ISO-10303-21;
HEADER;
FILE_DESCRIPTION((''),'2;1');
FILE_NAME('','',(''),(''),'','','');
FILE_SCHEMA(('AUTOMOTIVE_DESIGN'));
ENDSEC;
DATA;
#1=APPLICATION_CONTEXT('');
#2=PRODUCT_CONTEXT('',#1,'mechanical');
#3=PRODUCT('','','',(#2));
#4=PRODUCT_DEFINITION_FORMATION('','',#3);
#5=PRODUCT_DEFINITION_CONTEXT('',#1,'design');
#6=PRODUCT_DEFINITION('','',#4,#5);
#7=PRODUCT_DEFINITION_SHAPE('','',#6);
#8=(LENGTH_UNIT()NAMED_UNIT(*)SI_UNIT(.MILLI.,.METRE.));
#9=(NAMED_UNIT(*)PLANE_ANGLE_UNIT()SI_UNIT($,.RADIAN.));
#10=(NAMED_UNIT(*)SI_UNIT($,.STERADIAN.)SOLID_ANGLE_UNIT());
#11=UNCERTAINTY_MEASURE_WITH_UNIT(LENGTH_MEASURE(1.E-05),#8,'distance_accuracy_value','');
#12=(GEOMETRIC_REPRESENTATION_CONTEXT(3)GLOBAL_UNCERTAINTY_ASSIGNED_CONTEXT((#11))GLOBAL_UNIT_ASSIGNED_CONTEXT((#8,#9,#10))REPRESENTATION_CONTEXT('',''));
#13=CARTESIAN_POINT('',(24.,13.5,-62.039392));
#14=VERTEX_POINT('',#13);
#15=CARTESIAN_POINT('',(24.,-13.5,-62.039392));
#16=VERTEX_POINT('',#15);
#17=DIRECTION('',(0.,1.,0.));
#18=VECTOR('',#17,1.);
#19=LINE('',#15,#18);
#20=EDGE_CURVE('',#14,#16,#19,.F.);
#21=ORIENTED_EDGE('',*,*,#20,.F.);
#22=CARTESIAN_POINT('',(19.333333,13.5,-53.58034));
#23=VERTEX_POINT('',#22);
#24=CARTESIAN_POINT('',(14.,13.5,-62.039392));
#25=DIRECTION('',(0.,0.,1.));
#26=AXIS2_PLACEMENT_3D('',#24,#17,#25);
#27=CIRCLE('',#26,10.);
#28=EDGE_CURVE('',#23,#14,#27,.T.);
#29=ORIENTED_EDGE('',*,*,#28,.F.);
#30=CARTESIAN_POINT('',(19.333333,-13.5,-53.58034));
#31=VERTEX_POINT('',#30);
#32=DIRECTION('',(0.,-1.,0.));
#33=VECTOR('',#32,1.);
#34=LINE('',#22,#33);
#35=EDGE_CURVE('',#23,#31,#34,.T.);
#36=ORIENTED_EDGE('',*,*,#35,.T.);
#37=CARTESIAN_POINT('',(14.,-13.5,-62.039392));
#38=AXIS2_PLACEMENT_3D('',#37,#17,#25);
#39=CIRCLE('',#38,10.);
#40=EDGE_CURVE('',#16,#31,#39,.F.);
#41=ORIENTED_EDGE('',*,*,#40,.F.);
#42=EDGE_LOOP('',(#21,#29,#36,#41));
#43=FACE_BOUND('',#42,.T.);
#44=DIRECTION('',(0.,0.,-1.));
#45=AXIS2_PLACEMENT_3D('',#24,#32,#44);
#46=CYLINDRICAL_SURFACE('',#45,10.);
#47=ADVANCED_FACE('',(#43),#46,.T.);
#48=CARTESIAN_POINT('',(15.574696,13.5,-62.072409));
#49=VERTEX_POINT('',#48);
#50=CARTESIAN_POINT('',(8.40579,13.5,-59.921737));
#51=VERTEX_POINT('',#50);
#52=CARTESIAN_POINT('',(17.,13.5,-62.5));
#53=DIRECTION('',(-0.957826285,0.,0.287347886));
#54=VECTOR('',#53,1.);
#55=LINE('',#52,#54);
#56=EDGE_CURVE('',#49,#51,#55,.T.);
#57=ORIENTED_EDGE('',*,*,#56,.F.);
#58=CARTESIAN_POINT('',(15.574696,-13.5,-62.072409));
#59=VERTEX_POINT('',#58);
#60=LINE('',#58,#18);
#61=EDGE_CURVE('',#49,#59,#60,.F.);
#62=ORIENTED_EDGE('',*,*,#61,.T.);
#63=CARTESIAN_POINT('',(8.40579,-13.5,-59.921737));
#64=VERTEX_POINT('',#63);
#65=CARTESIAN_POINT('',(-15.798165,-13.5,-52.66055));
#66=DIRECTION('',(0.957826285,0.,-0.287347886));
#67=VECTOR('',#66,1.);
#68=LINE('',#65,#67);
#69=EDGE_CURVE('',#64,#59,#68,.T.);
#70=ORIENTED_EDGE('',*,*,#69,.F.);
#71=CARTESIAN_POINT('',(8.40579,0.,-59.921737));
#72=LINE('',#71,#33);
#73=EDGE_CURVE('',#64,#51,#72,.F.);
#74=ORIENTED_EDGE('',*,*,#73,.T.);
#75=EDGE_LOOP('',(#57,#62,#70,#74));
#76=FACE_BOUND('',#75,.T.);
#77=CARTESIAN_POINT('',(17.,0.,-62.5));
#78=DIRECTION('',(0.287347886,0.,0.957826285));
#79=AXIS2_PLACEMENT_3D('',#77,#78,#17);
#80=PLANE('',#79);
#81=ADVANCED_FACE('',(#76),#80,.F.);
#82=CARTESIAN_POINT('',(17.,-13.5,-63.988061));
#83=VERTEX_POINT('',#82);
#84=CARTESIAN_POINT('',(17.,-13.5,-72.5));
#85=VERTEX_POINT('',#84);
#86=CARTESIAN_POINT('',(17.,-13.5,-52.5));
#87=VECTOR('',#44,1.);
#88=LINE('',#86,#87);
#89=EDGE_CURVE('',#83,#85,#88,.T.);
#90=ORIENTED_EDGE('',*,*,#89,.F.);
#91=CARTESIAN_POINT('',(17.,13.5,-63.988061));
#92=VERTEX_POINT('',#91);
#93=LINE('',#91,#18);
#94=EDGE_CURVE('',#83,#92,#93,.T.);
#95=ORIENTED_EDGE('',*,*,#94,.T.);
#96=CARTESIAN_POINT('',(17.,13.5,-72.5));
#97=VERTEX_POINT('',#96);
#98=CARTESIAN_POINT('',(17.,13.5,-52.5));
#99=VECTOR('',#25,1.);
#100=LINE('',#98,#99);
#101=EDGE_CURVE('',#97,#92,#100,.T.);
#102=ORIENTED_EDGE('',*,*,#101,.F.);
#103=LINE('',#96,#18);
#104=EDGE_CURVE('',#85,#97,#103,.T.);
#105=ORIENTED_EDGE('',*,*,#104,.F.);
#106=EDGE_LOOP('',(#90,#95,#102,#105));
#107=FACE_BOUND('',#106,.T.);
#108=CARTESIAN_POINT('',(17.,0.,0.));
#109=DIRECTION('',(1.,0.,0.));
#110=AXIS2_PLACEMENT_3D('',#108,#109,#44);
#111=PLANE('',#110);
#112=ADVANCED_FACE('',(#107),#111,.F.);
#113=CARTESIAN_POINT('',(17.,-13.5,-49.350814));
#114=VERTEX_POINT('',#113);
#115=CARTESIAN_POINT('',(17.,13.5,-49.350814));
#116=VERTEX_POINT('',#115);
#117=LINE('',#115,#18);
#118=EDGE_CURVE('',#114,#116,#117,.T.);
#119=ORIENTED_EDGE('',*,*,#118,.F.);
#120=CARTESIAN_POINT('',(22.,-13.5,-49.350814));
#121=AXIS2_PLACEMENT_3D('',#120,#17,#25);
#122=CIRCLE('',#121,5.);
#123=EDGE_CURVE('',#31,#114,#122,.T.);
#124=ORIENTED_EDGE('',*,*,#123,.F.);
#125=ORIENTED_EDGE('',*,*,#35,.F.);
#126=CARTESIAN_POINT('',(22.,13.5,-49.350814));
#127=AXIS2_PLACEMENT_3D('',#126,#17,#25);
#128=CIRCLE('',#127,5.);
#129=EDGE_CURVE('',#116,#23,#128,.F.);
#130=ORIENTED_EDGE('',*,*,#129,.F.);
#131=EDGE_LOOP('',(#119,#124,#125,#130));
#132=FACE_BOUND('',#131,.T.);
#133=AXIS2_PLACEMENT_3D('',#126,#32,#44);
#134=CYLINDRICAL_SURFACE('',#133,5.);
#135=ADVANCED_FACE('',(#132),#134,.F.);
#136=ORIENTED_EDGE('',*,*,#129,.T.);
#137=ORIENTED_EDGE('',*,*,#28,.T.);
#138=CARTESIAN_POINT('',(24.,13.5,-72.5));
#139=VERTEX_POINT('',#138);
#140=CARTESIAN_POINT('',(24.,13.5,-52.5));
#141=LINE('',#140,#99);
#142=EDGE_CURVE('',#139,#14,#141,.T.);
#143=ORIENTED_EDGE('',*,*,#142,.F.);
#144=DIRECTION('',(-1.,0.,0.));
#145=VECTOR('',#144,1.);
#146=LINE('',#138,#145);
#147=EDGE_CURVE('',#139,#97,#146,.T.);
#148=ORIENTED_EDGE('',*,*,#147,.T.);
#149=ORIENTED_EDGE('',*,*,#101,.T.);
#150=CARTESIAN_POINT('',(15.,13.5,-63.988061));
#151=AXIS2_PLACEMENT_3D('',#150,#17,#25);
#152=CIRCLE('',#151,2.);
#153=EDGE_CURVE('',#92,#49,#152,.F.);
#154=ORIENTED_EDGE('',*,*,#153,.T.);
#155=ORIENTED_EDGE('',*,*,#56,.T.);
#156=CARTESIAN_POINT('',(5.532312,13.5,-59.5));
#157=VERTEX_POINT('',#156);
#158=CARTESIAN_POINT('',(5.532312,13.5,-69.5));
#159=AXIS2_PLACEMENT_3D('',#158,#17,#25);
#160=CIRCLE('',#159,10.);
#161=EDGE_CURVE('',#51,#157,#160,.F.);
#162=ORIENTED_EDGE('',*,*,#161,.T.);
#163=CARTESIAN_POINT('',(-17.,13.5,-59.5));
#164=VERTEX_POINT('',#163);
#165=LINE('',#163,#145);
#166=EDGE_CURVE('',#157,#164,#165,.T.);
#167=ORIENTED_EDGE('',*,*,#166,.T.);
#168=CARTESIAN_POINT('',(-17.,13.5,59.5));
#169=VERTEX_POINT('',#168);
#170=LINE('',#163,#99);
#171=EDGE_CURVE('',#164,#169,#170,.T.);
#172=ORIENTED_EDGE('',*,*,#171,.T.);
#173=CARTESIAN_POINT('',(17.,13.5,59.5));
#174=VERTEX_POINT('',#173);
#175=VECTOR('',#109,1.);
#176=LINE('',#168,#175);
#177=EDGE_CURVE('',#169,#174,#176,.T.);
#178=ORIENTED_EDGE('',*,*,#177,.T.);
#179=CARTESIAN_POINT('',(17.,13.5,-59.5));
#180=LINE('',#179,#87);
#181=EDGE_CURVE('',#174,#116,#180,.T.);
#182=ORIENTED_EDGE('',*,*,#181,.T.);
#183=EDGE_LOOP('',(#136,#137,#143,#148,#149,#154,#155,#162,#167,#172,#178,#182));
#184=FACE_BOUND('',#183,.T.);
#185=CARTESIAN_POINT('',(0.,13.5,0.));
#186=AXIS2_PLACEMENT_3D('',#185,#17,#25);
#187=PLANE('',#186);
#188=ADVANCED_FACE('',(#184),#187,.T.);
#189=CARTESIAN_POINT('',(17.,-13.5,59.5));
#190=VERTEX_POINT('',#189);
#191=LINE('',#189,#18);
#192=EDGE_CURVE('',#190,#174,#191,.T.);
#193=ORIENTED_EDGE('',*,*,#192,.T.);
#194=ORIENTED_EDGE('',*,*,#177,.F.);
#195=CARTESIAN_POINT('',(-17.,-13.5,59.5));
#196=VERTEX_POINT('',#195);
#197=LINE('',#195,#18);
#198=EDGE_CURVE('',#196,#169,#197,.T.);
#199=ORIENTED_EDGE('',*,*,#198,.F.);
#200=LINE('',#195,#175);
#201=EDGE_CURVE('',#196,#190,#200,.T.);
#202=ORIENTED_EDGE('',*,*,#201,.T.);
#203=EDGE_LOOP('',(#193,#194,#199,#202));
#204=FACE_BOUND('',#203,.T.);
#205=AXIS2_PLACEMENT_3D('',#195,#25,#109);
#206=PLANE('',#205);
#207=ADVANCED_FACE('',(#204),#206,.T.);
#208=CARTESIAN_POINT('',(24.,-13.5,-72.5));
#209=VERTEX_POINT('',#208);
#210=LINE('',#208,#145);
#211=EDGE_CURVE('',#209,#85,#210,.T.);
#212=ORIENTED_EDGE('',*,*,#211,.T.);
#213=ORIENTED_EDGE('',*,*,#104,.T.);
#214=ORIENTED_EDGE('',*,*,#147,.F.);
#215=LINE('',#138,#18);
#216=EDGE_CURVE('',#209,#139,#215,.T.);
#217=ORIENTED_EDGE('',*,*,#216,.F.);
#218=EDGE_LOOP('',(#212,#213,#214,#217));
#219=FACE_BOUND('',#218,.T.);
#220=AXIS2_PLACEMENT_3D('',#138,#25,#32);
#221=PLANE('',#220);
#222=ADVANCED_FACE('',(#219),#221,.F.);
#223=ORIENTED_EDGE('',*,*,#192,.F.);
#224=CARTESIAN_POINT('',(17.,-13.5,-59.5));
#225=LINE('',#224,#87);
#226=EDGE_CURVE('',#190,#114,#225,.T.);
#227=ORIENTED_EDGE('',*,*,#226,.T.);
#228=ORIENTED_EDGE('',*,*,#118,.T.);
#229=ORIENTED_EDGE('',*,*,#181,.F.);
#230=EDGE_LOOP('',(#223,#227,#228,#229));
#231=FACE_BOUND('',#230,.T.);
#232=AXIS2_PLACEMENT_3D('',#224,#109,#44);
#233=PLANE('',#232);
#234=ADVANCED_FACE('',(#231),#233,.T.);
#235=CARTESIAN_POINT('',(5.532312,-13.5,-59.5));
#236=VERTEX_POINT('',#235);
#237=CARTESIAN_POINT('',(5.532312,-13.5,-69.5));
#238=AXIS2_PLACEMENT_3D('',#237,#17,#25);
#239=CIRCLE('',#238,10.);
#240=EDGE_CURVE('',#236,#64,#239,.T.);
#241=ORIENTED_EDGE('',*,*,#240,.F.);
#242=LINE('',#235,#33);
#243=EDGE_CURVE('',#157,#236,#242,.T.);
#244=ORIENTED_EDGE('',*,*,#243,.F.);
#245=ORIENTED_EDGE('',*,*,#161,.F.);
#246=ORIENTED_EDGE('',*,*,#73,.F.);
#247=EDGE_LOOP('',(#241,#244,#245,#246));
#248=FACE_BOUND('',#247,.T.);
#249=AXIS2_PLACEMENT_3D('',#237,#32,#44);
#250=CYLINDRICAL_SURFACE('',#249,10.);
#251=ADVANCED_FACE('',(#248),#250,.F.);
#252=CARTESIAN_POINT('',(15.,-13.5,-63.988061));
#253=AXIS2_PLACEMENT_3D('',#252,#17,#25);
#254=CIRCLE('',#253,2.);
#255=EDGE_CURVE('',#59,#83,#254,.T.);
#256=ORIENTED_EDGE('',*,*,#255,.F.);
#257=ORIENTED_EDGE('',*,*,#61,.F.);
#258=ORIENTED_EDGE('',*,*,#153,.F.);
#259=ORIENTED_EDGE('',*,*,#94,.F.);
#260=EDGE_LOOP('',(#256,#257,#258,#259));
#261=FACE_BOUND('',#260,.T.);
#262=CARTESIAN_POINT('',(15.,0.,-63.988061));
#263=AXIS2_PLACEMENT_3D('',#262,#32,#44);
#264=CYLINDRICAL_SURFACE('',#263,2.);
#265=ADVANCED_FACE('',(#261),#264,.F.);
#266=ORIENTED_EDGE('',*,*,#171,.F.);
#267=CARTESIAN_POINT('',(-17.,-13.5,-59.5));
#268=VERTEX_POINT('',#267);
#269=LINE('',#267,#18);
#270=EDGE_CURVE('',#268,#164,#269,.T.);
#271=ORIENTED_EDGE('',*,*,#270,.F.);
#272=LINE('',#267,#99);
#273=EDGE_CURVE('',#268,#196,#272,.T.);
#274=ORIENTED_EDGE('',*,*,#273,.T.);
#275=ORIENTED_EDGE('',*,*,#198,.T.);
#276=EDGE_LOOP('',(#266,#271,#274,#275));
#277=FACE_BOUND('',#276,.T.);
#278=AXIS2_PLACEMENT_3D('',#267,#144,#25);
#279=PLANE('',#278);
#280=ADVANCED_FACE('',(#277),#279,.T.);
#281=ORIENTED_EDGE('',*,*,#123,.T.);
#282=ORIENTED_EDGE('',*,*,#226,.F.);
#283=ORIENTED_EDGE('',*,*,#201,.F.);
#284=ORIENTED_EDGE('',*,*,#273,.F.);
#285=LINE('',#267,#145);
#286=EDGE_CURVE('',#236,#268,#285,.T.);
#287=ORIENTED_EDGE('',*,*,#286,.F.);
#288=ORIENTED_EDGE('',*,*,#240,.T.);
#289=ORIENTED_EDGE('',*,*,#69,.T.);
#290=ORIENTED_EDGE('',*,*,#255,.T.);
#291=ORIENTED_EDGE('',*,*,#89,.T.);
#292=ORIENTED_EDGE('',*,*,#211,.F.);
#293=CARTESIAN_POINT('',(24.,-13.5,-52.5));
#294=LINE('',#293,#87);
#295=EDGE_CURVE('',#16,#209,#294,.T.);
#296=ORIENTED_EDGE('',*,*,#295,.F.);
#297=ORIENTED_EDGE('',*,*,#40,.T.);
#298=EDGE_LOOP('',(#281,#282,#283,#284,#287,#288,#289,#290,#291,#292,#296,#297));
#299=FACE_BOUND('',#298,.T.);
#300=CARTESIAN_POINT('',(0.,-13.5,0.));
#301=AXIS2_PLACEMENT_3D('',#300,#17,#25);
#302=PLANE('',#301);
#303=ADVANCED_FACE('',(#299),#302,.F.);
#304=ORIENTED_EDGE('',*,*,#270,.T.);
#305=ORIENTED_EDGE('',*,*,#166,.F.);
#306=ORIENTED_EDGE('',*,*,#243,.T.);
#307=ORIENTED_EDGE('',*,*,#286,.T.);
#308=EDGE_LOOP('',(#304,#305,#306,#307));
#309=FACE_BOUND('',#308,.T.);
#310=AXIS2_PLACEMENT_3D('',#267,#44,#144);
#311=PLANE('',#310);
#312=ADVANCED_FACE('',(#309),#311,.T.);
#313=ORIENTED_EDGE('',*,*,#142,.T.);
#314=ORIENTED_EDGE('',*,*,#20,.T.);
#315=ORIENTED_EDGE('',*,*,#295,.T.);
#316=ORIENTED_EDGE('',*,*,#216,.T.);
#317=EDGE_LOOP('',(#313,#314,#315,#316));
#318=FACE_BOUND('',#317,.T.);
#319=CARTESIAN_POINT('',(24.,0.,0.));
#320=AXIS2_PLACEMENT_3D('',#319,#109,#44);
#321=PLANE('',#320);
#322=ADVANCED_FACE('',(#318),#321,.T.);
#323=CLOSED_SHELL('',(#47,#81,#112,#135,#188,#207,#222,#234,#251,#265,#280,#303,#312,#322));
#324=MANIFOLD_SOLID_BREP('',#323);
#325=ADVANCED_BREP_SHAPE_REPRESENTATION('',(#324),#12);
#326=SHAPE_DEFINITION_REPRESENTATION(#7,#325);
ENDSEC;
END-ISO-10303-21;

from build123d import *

# Parameters (mm, degrees)
EXTRUDE_367_DEPTH      = 13.5
EXTRUDE_367_DEPTH_BACK = 13.5
SKETCH_1_W             = 34
SKETCH_1_H             = 119
SKETCH_2_W             = 20
SKETCH_2_H             = 27
EXTRUDE_574_DEPTH      = 7
CHAMFER_1_SIZE         = 10
CHAMFER_1_SIZE2        = 3
FILLET_2_R             = 10
FILLET_3_R             = 5
FILLET_4_R             = 2


with BuildPart() as part:
    # Эскиз1 → Extrude 367 (new, two sides: drawn at the far end of the back side and taken through both)
    with BuildSketch(Plane(origin=(0, 0, 0), x_dir=(1, 0, 0), z_dir=(0, 1, 0)).offset(-EXTRUDE_367_DEPTH_BACK)):
        Rectangle(SKETCH_1_W, SKETCH_1_H)
    extrude(amount=EXTRUDE_367_DEPTH + EXTRUDE_367_DEPTH_BACK)

    # Эскиз2 → Extrude 574 (add)
    with BuildSketch(Plane(origin=(17, 0, 0), x_dir=(0, 0, -1), z_dir=(1, 0, 0))):
        with Locations((62.5, 0)):
            Rectangle(SKETCH_2_W, SKETCH_2_H)
    extrude(amount=EXTRUDE_574_DEPTH)

    # Фаска1
    chamfer_1_edges = [part.edges().sort_by_distance(p)[0] for p in [
        (17, 0, -59.5),
    ]]
    chamfer_1_side = [part.faces().sort_by_distance(p)[0] for p in [
        (0, 0, -59.5),
    ]]
    chamfer(chamfer_1_edges, length=CHAMFER_1_SIZE, length2=CHAMFER_1_SIZE2, reference=chamfer_1_side[0])

    # Скругление2
    # the kernel refuses this fillet: 10 mm, written as the material it adds along each edge
    with BuildSketch(Plane(origin=(7, 13.5, -59.5), x_dir=(-1, 0, 0), z_dir=(0, -1, 0))) as fillet_2_piece_1:
        with BuildLine():
            CenterArc((FILLET_2_R * 0.146768836304, FILLET_2_R), FILLET_2_R, 253.300755766, 16.699244234)
            Line((-FILLET_2_R * 0.140579049263, FILLET_2_R * 0.0421737147788), (0, 0))
            Line((0, 0), (FILLET_2_R * 0.146768836304, 0))
        make_face()
    extrude(amount=27)
    # the kernel refuses this fillet: 10 mm, written as the material it takes off along each edge
    with BuildSketch(Plane(origin=(24, -37.348480035, -52.5), x_dir=(0, 0, -1), z_dir=(0, 1, 0))) as fillet_2_2_piece_1:
        with BuildLine():
            CenterArc((9.539392014, 10), FILLET_2_R, 197.457603124, 72.542396876)
            Line((0, 7), (0, 0))
            Line((0, 0), (9.539392014, 0))
        make_face()
    extrude(amount=74.696960071, mode=Mode.SUBTRACT)

    # Скругление3
    fillet_3_edges = [part.edges().sort_by_distance(p)[0] for p in [
        (17, 0, -52.5),
    ]]
    fillet(fillet_3_edges, radius=FILLET_3_R)

    # Скругление4
    fillet_4_edges = [part.edges().sort_by_distance(p)[0] for p in [
        (17, 0, -62.5),
    ]]
    fillet(fillet_4_edges, radius=FILLET_4_R)


solid = part.part
